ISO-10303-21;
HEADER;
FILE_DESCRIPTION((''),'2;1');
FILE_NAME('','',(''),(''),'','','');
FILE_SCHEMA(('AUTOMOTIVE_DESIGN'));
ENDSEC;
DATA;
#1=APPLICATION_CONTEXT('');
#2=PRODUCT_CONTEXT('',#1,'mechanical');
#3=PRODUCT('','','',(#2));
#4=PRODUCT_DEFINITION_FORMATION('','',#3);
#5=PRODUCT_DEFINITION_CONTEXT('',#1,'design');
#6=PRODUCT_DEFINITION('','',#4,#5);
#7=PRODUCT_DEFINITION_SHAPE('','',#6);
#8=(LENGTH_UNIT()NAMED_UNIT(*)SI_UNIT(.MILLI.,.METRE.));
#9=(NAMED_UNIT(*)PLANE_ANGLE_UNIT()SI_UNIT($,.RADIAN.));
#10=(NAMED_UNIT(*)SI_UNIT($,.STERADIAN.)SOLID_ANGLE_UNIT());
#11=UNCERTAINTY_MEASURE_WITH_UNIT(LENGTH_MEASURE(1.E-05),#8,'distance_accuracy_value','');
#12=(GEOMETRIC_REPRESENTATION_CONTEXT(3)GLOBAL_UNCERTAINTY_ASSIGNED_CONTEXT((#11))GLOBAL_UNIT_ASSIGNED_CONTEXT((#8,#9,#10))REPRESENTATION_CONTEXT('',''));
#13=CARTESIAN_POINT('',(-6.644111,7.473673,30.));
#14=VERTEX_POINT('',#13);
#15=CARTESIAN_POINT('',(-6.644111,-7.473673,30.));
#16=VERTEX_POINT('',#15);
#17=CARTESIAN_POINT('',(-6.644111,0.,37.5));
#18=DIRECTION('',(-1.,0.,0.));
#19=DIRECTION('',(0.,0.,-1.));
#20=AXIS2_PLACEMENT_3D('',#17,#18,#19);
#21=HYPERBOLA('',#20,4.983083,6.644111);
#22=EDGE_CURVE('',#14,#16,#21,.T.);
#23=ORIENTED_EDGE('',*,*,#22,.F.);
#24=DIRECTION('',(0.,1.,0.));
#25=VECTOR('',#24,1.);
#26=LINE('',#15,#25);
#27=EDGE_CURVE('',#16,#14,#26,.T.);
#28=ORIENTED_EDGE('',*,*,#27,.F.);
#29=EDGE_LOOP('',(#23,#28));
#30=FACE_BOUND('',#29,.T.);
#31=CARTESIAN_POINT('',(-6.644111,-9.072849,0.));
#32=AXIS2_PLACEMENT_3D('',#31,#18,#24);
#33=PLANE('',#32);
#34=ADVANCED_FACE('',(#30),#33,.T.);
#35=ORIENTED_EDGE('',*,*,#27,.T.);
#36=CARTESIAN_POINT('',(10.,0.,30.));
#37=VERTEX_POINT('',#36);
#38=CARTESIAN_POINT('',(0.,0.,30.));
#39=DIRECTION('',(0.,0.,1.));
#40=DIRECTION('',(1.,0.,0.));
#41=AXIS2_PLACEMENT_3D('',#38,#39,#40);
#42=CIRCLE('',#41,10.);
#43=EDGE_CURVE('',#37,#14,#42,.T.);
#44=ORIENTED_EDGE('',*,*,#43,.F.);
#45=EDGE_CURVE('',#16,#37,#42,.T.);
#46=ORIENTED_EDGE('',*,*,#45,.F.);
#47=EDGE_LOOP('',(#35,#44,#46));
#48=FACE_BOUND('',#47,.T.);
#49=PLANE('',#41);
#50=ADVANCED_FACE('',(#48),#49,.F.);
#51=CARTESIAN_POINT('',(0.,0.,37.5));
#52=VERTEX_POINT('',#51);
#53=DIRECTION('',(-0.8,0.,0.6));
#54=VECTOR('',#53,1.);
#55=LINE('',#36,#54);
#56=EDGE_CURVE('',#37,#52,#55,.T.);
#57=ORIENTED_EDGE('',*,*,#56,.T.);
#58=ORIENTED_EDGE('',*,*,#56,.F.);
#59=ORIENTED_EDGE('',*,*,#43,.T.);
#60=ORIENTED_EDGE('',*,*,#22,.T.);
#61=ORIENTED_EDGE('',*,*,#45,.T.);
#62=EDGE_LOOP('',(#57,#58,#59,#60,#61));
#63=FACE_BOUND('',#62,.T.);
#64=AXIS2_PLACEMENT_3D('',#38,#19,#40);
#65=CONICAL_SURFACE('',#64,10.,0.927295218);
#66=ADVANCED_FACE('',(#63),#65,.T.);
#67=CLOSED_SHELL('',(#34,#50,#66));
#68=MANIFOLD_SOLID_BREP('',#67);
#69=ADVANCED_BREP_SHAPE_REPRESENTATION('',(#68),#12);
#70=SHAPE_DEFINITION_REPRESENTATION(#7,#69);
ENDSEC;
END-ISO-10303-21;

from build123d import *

# Parameters (mm, degrees)
F3_DEPTH       = 5
F3_DEPTH_BACK  = 50
F4_DEPTH       = 30
F7_DEPTH       = 5
F7_DEPTH_BACK  = 5
F10_DEPTH      = 5
F10_DEPTH_BACK = 5
F12_DEPTH      = 20


# Not quite as in the source:
# - a feature names something its author has since deleted; it is built from what else it names


with BuildPart() as f1:
    # F0 (on Front) → F1 (revolve)
    with BuildSketch(Plane.XZ):
        Polygon((0, 37.5), (0, 30), (10, 30), align=None)
    revolve(axis=Axis((0, 0, 33.75), (0, 0, 1)))

    # F2 (on Top) → F3 (cut, two sides)
    with BuildSketch(Plane.XY) as f3_sk:
        with BuildLine():
            Line((-6.644110661, 4.455984013), (-6.644110661, 7.4998452328))
            Line((-6.644110661, 7.4998452328), (-11.5474741906, 7.4998452328))
            Line((-11.5474741906, 7.4998452328), (-11.5474741906, -9.0728485957))
            Line((-11.5474741906, -9.0728485957), (-6.644110661, -9.0728485957))
            Line((-6.644110661, -9.0728485957), (-6.644110661, -4.455984013))
            ThreePointArc((-6.644110661, -4.455984013), (-8, 0), (-6.644110661, 4.455984013))
        make_face()
        with BuildLine():
            Line((-6.644110661, -4.455984013), (-6.644110661, 4.455984013))
            ThreePointArc((-6.644110661, 4.455984013), (-8, 0), (-6.644110661, -4.455984013))
        make_face()
    extrude(amount=-F3_DEPTH, mode=Mode.SUBTRACT)
    extrude(f3_sk.sketch, amount=F3_DEPTH_BACK, mode=Mode.SUBTRACT)

    # F2 (on Top) → F4 (cut)
    with BuildSketch(Plane.XY):
        with BuildLine():
            ThreePointArc((8, 0), (2.3288532277, 7.6535248509), (-6.644110661, 4.455984013))
            Line((-6.644110661, 4.455984013), (-6.644110661, -4.455984013))
            ThreePointArc((-6.644110661, -4.455984013), (2.3288532277, -7.6535248509), (8, 0))
        make_face()
    extrude(amount=F4_DEPTH, mode=Mode.SUBTRACT)

    # F6 (on line) → F7 (cut, two sides)
    with BuildSketch(Plane(origin=(3.1843009926, -8.1633897791, 0), x_dir=(-0.9316321862, -0.3634026275, 0), z_dir=(-0.3634026275, 0.9316321862, 0))) as f7_sk:
        with BuildLine():
            ThreePointArc((0, 28), (-4.026334039, 15), (0, 2))
            ThreePointArc((0, 2), (4.026334039, 15), (0, 28))
        make_face()
    extrude(amount=F7_DEPTH, mode=Mode.SUBTRACT)
    extrude(f7_sk.sketch, amount=-F7_DEPTH_BACK, mode=Mode.SUBTRACT)

    # F9 (on line) → F10 (cut, two sides)
    with BuildSketch(Plane(origin=(3.1843009926, 8.1633897791, 0), x_dir=(0.9316321862, -0.3634026275, 0), z_dir=(-0.3634026275, -0.9316321862, 0))) as f10_sk:
        with BuildLine():
            ThreePointArc((0, 28), (-4.026334039, 15), (0, 2))
            ThreePointArc((0, 2), (4.026334039, 15), (0, 28))
        make_face()
    extrude(amount=-F10_DEPTH, mode=Mode.SUBTRACT)
    extrude(f10_sk.sketch, amount=F10_DEPTH_BACK, mode=Mode.SUBTRACT)

    # F11 (on Right) → F12 (cut)
    with BuildSketch(Plane.YZ):
        with BuildLine():
            ThreePointArc((0, 28), (-4.026334039, 15), (0, 2))
            ThreePointArc((0, 2), (4.026334039, 15), (0, 28))
        make_face()
    extrude(amount=F12_DEPTH, mode=Mode.SUBTRACT)


solid = f1.part
